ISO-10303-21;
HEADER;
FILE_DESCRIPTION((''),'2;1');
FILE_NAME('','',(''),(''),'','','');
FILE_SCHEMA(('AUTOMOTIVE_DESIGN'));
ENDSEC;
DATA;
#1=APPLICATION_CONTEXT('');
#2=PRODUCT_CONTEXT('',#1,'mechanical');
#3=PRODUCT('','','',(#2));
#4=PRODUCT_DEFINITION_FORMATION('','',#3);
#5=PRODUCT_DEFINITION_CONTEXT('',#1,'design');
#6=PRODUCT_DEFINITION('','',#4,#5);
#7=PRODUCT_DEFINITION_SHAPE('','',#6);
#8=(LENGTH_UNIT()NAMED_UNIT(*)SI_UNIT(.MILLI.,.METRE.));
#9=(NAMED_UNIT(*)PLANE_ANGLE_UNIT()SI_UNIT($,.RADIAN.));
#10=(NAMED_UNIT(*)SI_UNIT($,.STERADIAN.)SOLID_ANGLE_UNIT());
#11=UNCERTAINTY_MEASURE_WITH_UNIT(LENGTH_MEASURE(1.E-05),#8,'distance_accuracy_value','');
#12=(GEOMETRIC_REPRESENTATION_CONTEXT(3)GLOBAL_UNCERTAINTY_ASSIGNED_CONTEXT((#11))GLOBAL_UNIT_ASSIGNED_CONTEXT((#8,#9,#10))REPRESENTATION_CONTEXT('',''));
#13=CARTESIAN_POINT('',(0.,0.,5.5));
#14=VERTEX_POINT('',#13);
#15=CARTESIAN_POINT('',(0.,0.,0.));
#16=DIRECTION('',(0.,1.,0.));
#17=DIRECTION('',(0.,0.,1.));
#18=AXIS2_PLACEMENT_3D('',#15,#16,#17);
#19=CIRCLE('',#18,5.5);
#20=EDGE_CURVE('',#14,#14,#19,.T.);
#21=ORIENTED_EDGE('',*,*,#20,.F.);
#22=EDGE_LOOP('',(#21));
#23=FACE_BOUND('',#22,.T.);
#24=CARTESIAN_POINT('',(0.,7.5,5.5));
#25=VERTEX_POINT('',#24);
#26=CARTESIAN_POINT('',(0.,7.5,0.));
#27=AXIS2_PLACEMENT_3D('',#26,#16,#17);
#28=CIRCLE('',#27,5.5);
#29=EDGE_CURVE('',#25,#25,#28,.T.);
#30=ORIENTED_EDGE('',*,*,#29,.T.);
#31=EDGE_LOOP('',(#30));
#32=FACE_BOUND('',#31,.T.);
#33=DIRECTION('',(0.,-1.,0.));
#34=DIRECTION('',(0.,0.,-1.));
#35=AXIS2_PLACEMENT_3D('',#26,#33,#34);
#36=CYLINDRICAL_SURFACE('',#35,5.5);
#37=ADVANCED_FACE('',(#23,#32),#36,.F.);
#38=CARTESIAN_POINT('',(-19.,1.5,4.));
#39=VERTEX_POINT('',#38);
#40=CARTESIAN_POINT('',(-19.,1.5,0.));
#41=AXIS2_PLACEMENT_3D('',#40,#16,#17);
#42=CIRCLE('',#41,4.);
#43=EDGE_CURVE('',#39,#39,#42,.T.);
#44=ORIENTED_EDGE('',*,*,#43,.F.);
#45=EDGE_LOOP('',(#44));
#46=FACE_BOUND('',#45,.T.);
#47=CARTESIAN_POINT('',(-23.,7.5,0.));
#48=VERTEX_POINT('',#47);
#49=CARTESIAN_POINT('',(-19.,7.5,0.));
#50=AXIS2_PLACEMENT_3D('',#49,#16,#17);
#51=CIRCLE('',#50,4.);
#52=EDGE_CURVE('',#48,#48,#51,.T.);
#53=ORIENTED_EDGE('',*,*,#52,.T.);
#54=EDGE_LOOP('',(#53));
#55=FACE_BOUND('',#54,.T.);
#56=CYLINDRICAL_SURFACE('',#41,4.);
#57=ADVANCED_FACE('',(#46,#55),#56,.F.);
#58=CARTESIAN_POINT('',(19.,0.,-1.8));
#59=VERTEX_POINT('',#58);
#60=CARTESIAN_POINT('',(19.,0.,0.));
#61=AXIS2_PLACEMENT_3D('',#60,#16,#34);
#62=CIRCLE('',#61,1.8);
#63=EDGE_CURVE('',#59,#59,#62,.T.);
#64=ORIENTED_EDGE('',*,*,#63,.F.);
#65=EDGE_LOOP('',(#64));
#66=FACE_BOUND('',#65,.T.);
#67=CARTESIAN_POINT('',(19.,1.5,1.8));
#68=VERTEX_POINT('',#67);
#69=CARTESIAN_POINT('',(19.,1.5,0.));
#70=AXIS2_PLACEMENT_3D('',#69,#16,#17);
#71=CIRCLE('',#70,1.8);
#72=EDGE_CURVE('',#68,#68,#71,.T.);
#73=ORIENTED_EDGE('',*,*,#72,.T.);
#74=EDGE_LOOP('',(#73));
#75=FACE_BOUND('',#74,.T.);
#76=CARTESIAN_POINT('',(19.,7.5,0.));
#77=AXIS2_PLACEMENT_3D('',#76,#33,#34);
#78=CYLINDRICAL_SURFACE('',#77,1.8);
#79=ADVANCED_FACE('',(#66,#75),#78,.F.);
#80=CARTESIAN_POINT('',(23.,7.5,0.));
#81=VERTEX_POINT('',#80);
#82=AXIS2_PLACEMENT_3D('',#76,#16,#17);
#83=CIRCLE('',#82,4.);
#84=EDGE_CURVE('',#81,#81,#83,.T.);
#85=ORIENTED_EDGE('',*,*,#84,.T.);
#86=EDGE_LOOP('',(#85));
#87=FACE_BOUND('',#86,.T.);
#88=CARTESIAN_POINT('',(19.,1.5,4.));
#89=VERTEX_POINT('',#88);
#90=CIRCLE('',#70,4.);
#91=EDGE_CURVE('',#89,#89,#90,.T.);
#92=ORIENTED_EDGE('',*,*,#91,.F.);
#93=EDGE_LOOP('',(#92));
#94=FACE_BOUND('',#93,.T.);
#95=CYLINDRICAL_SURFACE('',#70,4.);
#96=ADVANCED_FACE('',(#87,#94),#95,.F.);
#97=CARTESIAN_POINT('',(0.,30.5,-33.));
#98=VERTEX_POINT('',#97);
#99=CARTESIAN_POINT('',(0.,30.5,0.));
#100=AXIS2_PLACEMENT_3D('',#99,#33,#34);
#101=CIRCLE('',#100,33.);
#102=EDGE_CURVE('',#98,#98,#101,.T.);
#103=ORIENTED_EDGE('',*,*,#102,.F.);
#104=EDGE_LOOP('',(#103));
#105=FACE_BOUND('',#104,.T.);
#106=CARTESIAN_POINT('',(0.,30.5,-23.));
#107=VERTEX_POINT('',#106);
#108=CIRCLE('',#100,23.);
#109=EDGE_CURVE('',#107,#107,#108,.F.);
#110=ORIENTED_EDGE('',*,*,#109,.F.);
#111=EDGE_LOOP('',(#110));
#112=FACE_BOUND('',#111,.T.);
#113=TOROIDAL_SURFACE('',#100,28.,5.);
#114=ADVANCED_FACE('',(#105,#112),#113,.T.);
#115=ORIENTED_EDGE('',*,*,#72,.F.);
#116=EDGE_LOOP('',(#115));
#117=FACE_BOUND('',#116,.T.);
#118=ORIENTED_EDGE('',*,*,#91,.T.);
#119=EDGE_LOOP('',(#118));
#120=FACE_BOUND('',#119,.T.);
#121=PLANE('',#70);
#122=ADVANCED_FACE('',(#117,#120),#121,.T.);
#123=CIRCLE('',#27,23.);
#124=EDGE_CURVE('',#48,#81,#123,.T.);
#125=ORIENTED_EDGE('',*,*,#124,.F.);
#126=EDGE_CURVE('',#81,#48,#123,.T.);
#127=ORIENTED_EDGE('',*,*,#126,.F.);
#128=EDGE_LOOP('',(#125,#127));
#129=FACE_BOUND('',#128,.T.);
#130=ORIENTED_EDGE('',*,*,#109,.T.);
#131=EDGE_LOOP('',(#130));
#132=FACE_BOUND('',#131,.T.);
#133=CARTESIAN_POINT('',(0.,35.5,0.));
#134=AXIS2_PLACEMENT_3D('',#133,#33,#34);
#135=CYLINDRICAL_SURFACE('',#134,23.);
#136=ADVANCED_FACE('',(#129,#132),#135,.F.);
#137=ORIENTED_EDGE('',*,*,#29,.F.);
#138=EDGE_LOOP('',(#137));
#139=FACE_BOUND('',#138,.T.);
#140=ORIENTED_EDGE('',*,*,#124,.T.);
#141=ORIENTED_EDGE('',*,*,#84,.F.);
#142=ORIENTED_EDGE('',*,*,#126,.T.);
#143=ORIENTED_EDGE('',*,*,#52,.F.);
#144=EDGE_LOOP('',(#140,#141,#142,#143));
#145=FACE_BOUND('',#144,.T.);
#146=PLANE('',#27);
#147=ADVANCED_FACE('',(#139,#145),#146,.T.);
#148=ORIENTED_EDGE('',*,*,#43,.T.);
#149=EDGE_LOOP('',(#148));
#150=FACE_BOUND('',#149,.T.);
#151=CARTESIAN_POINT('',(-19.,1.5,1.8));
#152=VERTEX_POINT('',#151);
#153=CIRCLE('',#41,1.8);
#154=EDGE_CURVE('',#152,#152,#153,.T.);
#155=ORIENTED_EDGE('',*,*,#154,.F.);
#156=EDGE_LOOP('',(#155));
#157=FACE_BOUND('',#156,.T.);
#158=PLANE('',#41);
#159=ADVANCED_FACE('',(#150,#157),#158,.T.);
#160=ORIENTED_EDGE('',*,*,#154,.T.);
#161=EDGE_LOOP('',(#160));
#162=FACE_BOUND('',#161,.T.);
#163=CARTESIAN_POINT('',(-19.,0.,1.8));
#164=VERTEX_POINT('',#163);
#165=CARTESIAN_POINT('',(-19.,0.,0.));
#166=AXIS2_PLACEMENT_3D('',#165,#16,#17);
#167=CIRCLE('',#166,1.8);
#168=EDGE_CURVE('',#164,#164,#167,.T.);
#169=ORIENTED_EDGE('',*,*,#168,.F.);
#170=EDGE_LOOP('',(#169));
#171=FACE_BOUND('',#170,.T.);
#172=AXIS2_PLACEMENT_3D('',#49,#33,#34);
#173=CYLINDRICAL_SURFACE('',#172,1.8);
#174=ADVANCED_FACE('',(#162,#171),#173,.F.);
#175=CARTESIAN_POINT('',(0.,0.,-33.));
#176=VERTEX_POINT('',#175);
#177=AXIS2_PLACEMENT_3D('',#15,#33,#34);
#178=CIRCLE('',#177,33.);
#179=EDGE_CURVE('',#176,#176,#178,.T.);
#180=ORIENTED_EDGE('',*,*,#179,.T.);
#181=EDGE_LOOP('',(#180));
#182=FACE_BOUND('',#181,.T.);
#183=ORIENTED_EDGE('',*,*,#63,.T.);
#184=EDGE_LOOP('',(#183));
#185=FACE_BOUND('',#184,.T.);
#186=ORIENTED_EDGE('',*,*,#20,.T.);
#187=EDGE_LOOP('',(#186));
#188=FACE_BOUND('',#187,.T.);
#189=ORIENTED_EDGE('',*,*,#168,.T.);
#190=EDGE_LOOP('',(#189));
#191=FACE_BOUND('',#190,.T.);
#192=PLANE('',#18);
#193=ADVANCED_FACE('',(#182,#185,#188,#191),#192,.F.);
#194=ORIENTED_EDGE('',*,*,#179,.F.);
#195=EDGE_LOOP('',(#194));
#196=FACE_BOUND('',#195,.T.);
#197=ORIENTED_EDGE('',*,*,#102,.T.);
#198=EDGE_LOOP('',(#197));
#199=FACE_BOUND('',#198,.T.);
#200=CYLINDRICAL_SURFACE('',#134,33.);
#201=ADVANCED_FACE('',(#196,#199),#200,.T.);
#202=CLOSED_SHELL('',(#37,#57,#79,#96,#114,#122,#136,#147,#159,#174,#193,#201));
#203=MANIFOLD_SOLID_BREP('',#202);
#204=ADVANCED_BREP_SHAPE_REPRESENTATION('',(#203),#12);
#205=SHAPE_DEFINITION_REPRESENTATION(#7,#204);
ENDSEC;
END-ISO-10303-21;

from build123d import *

# Parameters (mm, degrees)
SKETCH1_R           = 25
SKETCH1_R_2         = 1.8
SKETCH1_R_3         = 5.5
BOSS_EXTRUDE1_DEPTH = 7.5
SKETCH2_R           = 4
CUT_EXTRUDE1_DEPTH  = 6
SKETCH3_R           = 33
SKETCH3_R_2         = 23
BOSS_EXTRUDE2_DEPTH = 35.5
FILLET1_R           = 5


with BuildPart() as part:
    # Sketch1 → Boss-Extrude1 (new body)
    with BuildSketch(Plane(origin=(0, 0, 0), x_dir=(1, 0, 0), z_dir=(0, 1, 0))):
        with Locations(Location((0, 0, 0), (0, 0, 270))):
            Circle(SKETCH1_R)
        with Locations(Location((-19, 0, 0), (0, 0, 270))):
            Circle(SKETCH1_R_2, mode=Mode.SUBTRACT)
        with Locations(Location((19, 0, 0), (0, 0, 90))):
            Circle(SKETCH1_R_2, mode=Mode.SUBTRACT)
        with Locations(Location((0, 0, 0), (0, 0, 270))):
            Circle(SKETCH1_R_3, mode=Mode.SUBTRACT)
    extrude(amount=BOSS_EXTRUDE1_DEPTH)

    # Sketch2 → Cut-Extrude1 (cut)
    with BuildSketch(Plane(origin=(0, 7.5, 0), x_dir=(1, 0, 0), z_dir=(0, 1, 0))):
        with Locations(Location((-19, 0, 0), (0, 0, 270))):
            Circle(SKETCH2_R)
        with Locations(Location((19, 0, 0), (0, 0, 270))):
            Circle(SKETCH2_R)
    extrude(amount=-CUT_EXTRUDE1_DEPTH, mode=Mode.SUBTRACT)

    # Sketch3 → Boss-Extrude2 (add)
    with BuildSketch(Plane.XZ):
        with Locations(Location((0, 0, 0), (0, 0, 270))):
            Circle(SKETCH3_R)
        with Locations(Location((0, 0, 0), (0, 0, 270))):
            Circle(SKETCH3_R_2, mode=Mode.SUBTRACT)
    extrude(amount=-BOSS_EXTRUDE2_DEPTH)

    # Fillet1
    fillet1_edges = [part.edges().sort_by_distance(p)[0] for p in [
        (0, 35.5, 33),
        (0, 35.5, 23),
    ]]
    fillet(fillet1_edges, radius=FILLET1_R - 0.0001)  # a hair under: the kernel refuses the full size


solid = part.part
